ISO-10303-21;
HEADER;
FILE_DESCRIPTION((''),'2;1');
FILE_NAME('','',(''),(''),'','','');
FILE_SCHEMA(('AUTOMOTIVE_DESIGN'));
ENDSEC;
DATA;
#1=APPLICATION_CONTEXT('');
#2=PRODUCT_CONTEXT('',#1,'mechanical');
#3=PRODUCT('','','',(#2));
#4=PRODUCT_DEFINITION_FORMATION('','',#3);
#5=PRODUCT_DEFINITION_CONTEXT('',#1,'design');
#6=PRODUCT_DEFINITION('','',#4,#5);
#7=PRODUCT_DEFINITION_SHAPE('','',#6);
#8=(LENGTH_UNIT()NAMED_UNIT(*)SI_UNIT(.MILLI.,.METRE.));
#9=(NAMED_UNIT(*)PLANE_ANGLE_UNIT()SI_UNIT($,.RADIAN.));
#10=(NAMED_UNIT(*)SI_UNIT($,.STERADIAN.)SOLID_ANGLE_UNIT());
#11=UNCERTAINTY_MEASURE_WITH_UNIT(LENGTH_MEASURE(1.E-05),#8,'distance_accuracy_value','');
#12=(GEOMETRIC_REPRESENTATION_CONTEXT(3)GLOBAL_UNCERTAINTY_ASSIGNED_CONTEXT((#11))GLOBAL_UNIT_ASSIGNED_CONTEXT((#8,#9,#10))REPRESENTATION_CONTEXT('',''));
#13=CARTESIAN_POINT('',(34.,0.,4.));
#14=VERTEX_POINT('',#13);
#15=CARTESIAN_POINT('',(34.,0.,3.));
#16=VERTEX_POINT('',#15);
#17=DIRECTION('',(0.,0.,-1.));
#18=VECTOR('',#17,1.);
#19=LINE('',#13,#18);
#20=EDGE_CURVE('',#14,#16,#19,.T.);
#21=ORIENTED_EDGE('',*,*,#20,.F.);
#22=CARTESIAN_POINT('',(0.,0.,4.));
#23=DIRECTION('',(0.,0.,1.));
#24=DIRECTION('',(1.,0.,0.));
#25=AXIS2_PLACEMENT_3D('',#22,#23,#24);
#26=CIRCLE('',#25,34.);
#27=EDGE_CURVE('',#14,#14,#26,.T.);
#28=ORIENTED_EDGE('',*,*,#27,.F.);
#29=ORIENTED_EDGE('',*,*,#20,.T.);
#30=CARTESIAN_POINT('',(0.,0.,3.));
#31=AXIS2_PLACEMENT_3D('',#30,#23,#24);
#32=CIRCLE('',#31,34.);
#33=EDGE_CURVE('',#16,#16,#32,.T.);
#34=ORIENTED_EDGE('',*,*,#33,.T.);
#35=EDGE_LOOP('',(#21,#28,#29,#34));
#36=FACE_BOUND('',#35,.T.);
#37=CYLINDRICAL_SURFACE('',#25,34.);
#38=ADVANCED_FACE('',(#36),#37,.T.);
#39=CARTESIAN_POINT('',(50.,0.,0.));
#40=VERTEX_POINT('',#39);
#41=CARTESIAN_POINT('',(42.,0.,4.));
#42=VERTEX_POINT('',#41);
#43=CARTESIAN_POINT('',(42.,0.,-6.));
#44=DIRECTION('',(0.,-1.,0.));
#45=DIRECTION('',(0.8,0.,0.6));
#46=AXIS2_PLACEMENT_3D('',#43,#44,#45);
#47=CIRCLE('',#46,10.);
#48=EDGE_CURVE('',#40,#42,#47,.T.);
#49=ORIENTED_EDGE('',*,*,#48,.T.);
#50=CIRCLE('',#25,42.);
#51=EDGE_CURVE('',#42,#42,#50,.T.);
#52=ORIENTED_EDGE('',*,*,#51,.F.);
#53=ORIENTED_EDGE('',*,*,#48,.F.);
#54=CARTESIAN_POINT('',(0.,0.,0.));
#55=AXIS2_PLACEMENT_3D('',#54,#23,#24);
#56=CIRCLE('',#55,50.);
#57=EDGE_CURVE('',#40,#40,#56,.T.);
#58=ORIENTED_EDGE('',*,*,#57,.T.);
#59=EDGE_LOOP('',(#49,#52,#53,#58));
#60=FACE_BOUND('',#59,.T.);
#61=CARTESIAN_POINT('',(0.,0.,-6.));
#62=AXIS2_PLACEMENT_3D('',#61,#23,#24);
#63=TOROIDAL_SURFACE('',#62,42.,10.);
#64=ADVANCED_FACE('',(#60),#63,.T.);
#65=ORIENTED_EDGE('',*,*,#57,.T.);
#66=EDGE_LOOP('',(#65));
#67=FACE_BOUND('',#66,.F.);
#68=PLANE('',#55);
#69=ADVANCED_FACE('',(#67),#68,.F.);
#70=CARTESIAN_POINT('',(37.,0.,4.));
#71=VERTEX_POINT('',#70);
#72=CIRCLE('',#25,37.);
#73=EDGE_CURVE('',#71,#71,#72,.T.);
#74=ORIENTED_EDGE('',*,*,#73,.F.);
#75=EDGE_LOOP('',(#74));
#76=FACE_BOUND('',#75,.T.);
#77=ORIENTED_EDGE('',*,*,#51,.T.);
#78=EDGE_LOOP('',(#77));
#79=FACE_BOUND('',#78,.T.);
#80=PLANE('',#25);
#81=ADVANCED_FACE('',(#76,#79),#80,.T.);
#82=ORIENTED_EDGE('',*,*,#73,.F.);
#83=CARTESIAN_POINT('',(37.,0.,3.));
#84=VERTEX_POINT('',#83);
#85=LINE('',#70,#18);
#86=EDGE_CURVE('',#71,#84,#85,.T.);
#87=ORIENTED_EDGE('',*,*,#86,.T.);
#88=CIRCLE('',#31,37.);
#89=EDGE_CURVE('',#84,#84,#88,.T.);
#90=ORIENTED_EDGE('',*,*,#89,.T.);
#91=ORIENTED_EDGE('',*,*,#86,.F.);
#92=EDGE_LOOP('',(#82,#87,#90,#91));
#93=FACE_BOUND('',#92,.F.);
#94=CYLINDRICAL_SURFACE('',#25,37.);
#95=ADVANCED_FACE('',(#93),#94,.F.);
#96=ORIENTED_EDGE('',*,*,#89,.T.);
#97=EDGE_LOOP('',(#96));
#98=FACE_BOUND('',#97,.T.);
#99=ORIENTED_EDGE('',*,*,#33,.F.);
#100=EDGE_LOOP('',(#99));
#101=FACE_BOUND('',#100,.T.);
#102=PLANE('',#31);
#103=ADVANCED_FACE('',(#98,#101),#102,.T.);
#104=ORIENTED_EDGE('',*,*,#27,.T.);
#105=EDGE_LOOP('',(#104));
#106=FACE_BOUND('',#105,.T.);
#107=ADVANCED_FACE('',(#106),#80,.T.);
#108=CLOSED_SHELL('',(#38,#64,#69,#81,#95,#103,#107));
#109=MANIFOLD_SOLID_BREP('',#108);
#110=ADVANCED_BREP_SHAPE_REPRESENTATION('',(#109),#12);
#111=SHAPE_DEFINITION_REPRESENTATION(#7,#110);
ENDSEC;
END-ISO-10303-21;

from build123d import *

# Parameters (mm, degrees)
F0_R     = 50
F1_DEPTH = 4
F3_R     = 37
F3_R_2   = 34
F4_DEPTH = 1


# Not quite as in the source:
# - a fillet or chamfer that OpenCascade refuses, or shapes differently, is made with other operations: its cross-section is extruded or revolved along the edge and cut away or added


with BuildPart() as f1:
    # F0 (on Top) → F1 (new body)
    with BuildSketch(Plane.XY):
        Circle(F0_R)
    extrude(amount=F1_DEPTH)

    # F2: fillet of radius 10 on 1 edges, made by hand

    # F2_s1 → F2_t2 (revolve, cut)
    with BuildSketch(Plane.XZ):
        with BuildLine():
            ThreePointArc((50, 0), (46.472135955, 2.94427191), (42, 4))
            Line((42, 4), (50, 4))
            Line((50, 4), (50, 0))
        make_face()
    revolve(axis=Axis((0, 0, 4), (0, 0, 1)), mode=Mode.SUBTRACT)

    # F3 (on face) → F4 (cut)
    with BuildSketch(Plane.XY.offset(4)):
        Circle(F3_R)
        Circle(F3_R_2, mode=Mode.SUBTRACT)
    extrude(amount=-F4_DEPTH, mode=Mode.SUBTRACT)


solid = f1.part
